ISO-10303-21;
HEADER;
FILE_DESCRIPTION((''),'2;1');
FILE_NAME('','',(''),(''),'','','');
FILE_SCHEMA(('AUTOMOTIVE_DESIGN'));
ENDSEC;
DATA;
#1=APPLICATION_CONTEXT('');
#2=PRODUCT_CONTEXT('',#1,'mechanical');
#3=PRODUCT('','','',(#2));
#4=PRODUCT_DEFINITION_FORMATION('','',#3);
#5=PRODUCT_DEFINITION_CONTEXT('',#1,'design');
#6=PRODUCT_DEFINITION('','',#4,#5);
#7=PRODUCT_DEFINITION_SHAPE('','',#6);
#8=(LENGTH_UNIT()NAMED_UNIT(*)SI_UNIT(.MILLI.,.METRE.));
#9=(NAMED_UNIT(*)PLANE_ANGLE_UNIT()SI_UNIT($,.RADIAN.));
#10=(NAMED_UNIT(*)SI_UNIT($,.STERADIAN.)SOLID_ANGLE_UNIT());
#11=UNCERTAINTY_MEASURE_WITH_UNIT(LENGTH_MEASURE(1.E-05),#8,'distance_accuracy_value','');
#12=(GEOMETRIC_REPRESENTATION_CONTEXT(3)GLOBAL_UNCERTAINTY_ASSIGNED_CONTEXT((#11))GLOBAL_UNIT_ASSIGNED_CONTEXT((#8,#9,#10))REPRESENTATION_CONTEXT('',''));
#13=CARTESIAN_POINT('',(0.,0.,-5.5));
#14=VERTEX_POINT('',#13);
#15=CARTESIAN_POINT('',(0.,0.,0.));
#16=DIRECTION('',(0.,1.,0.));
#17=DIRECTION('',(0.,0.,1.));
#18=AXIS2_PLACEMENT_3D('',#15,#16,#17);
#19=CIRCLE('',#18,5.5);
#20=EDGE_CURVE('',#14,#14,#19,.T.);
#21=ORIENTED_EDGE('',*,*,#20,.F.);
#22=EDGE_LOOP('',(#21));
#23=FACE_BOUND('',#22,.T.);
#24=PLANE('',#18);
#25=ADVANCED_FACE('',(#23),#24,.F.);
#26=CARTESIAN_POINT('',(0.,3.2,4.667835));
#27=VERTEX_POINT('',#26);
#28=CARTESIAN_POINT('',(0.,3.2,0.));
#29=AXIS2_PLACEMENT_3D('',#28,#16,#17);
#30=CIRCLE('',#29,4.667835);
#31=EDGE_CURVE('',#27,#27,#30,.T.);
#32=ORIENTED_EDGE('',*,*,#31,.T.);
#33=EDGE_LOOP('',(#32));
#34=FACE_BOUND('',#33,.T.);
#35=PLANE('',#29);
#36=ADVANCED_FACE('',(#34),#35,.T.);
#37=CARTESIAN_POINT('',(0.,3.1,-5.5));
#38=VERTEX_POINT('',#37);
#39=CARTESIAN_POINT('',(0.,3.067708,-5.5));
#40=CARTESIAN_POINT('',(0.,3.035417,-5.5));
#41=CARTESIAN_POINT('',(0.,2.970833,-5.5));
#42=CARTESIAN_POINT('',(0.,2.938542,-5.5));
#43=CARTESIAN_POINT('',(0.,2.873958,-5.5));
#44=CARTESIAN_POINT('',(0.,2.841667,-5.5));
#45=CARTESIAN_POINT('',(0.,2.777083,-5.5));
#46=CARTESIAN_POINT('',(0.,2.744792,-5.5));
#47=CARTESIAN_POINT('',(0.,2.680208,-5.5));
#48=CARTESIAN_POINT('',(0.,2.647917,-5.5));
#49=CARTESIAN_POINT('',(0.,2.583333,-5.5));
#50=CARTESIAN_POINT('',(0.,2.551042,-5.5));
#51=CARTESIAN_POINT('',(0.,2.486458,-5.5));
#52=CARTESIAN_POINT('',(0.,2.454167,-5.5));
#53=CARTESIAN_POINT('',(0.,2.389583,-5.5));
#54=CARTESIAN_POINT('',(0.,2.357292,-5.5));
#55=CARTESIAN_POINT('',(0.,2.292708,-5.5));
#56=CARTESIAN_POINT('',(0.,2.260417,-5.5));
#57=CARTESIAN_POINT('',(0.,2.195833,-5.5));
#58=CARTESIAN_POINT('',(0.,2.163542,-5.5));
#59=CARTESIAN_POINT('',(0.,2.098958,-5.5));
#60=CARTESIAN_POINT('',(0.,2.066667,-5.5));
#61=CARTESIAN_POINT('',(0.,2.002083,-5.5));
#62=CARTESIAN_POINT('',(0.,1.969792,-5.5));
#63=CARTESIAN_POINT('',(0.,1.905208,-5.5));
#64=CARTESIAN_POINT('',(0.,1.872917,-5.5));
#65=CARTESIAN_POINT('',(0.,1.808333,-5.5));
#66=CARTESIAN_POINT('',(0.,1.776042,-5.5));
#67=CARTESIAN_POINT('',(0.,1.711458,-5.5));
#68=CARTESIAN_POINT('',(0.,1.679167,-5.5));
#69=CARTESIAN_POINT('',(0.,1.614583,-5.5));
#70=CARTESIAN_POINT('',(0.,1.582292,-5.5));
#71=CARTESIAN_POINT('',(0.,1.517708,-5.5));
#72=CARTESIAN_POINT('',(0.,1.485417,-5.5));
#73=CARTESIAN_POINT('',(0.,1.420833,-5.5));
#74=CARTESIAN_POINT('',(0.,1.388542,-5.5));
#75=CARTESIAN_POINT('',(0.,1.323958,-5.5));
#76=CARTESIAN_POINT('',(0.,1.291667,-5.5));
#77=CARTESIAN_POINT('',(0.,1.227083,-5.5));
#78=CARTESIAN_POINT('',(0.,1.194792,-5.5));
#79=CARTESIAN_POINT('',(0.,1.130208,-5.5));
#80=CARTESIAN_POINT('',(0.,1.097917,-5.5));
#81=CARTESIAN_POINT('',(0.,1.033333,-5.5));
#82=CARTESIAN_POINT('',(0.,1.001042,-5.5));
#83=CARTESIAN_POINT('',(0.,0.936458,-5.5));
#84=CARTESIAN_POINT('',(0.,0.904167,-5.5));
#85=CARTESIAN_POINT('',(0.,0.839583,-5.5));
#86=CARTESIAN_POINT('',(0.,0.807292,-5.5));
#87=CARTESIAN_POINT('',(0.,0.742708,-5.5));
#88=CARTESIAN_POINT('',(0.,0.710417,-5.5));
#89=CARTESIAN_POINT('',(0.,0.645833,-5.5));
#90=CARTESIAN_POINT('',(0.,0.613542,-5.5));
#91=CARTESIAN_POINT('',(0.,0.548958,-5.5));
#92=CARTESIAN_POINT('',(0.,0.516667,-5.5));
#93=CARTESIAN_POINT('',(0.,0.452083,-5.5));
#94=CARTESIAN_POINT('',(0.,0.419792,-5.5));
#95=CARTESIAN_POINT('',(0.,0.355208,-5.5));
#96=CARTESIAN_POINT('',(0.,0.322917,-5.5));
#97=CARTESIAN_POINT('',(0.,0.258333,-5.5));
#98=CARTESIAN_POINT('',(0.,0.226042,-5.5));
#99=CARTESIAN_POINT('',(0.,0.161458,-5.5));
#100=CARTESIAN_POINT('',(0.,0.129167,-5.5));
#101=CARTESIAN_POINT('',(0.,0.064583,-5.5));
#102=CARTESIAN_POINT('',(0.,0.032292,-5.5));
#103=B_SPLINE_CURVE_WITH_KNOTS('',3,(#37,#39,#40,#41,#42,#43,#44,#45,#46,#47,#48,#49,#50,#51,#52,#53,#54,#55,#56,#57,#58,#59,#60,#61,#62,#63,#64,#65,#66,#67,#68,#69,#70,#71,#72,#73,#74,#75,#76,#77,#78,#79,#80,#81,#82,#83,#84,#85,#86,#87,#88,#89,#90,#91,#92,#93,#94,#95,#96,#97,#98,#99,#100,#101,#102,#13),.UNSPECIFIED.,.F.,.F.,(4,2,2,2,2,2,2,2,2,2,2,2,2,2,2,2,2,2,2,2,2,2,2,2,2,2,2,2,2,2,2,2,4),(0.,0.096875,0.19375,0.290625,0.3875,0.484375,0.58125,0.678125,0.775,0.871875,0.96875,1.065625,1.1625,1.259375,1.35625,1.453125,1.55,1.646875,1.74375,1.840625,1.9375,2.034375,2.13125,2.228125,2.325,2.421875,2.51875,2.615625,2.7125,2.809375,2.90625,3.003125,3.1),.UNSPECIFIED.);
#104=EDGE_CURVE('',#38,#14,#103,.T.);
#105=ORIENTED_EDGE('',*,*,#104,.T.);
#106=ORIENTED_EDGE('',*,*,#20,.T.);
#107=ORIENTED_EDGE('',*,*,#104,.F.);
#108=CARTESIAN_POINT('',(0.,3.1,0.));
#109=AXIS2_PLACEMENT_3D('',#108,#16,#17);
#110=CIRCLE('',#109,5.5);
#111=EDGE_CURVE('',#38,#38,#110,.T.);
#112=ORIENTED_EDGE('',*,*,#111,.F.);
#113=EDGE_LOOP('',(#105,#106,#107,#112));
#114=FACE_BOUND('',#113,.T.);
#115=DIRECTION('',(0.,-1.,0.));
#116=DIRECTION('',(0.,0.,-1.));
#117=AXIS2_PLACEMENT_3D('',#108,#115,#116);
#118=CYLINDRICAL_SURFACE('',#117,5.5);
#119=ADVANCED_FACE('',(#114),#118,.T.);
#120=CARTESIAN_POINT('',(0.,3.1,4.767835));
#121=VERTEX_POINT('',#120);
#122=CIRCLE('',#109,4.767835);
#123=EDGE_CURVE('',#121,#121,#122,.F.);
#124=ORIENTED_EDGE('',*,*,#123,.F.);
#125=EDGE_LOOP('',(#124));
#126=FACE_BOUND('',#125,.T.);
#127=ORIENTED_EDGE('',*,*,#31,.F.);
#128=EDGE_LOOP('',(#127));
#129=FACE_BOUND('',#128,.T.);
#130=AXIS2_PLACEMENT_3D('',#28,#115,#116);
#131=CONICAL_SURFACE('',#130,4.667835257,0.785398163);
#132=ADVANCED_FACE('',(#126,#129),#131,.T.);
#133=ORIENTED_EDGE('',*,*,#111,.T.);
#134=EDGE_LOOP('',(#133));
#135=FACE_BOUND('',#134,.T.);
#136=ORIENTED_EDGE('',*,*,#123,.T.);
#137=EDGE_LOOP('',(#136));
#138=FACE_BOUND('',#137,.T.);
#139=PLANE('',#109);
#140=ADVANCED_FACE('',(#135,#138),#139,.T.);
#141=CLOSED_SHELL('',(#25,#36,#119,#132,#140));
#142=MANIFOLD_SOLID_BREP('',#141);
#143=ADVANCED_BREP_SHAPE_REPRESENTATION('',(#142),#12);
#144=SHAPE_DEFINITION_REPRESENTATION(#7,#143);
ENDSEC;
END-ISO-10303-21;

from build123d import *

# Parameters (mm, degrees)
SKETCH1_R           = 5.5
BOSS_EXTRUDE1_DEPTH = 3.1
SKETCH2_R           = 5.167835257
BOSS_EXTRUDE2_DEPTH = 0.1
CHAMFER1_SIZE       = 0.5


with BuildPart() as part:
    # Sketch1 → Boss-Extrude1 (new body)
    with BuildSketch(Plane(origin=(0, 0, 0), x_dir=(1, 0, 0), z_dir=(0, 1, 0))):
        with Locations(Location((0, 0, 0), (0, 0, 90))):
            Circle(SKETCH1_R)
    extrude(amount=BOSS_EXTRUDE1_DEPTH)

    # Sketch2 → Boss-Extrude2 (add)
    with BuildSketch(Plane(origin=(0, 3.1, 0), x_dir=(1, 0, 0), z_dir=(0, 1, 0))):
        with Locations(Location((0, 0, 0), (0, 0, 270))):
            Circle(SKETCH2_R)
    extrude(amount=BOSS_EXTRUDE2_DEPTH)

    # Chamfer1
    # the kernel refuses this chamfer: 0.5 mm, written as the material it takes off along each edge
    with BuildSketch(Plane(origin=(0, 3.2, 0), x_dir=(0, 0, 1), z_dir=(-1, 0, 0))) as chamfer1_piece_1_section:
        Polygon((5.167835257, -CHAMFER1_SIZE), (5.167835257 - CHAMFER1_SIZE, 0), (5.167835257, 0), align=None)
    chamfer1_piece_1 = revolve(axis=Axis((0, 3.2, 0), (0, 1, 0)), mode=Mode.PRIVATE)
    chamfer1_piece_1 = split(chamfer1_piece_1, bisect_by=Plane(origin=(0, 3.1, -4.719067591), z_dir=(0, 1, 0)), keep=Keep.TOP, mode=Mode.PRIVATE)
    add(chamfer1_piece_1, mode=Mode.SUBTRACT)


solid = part.part
